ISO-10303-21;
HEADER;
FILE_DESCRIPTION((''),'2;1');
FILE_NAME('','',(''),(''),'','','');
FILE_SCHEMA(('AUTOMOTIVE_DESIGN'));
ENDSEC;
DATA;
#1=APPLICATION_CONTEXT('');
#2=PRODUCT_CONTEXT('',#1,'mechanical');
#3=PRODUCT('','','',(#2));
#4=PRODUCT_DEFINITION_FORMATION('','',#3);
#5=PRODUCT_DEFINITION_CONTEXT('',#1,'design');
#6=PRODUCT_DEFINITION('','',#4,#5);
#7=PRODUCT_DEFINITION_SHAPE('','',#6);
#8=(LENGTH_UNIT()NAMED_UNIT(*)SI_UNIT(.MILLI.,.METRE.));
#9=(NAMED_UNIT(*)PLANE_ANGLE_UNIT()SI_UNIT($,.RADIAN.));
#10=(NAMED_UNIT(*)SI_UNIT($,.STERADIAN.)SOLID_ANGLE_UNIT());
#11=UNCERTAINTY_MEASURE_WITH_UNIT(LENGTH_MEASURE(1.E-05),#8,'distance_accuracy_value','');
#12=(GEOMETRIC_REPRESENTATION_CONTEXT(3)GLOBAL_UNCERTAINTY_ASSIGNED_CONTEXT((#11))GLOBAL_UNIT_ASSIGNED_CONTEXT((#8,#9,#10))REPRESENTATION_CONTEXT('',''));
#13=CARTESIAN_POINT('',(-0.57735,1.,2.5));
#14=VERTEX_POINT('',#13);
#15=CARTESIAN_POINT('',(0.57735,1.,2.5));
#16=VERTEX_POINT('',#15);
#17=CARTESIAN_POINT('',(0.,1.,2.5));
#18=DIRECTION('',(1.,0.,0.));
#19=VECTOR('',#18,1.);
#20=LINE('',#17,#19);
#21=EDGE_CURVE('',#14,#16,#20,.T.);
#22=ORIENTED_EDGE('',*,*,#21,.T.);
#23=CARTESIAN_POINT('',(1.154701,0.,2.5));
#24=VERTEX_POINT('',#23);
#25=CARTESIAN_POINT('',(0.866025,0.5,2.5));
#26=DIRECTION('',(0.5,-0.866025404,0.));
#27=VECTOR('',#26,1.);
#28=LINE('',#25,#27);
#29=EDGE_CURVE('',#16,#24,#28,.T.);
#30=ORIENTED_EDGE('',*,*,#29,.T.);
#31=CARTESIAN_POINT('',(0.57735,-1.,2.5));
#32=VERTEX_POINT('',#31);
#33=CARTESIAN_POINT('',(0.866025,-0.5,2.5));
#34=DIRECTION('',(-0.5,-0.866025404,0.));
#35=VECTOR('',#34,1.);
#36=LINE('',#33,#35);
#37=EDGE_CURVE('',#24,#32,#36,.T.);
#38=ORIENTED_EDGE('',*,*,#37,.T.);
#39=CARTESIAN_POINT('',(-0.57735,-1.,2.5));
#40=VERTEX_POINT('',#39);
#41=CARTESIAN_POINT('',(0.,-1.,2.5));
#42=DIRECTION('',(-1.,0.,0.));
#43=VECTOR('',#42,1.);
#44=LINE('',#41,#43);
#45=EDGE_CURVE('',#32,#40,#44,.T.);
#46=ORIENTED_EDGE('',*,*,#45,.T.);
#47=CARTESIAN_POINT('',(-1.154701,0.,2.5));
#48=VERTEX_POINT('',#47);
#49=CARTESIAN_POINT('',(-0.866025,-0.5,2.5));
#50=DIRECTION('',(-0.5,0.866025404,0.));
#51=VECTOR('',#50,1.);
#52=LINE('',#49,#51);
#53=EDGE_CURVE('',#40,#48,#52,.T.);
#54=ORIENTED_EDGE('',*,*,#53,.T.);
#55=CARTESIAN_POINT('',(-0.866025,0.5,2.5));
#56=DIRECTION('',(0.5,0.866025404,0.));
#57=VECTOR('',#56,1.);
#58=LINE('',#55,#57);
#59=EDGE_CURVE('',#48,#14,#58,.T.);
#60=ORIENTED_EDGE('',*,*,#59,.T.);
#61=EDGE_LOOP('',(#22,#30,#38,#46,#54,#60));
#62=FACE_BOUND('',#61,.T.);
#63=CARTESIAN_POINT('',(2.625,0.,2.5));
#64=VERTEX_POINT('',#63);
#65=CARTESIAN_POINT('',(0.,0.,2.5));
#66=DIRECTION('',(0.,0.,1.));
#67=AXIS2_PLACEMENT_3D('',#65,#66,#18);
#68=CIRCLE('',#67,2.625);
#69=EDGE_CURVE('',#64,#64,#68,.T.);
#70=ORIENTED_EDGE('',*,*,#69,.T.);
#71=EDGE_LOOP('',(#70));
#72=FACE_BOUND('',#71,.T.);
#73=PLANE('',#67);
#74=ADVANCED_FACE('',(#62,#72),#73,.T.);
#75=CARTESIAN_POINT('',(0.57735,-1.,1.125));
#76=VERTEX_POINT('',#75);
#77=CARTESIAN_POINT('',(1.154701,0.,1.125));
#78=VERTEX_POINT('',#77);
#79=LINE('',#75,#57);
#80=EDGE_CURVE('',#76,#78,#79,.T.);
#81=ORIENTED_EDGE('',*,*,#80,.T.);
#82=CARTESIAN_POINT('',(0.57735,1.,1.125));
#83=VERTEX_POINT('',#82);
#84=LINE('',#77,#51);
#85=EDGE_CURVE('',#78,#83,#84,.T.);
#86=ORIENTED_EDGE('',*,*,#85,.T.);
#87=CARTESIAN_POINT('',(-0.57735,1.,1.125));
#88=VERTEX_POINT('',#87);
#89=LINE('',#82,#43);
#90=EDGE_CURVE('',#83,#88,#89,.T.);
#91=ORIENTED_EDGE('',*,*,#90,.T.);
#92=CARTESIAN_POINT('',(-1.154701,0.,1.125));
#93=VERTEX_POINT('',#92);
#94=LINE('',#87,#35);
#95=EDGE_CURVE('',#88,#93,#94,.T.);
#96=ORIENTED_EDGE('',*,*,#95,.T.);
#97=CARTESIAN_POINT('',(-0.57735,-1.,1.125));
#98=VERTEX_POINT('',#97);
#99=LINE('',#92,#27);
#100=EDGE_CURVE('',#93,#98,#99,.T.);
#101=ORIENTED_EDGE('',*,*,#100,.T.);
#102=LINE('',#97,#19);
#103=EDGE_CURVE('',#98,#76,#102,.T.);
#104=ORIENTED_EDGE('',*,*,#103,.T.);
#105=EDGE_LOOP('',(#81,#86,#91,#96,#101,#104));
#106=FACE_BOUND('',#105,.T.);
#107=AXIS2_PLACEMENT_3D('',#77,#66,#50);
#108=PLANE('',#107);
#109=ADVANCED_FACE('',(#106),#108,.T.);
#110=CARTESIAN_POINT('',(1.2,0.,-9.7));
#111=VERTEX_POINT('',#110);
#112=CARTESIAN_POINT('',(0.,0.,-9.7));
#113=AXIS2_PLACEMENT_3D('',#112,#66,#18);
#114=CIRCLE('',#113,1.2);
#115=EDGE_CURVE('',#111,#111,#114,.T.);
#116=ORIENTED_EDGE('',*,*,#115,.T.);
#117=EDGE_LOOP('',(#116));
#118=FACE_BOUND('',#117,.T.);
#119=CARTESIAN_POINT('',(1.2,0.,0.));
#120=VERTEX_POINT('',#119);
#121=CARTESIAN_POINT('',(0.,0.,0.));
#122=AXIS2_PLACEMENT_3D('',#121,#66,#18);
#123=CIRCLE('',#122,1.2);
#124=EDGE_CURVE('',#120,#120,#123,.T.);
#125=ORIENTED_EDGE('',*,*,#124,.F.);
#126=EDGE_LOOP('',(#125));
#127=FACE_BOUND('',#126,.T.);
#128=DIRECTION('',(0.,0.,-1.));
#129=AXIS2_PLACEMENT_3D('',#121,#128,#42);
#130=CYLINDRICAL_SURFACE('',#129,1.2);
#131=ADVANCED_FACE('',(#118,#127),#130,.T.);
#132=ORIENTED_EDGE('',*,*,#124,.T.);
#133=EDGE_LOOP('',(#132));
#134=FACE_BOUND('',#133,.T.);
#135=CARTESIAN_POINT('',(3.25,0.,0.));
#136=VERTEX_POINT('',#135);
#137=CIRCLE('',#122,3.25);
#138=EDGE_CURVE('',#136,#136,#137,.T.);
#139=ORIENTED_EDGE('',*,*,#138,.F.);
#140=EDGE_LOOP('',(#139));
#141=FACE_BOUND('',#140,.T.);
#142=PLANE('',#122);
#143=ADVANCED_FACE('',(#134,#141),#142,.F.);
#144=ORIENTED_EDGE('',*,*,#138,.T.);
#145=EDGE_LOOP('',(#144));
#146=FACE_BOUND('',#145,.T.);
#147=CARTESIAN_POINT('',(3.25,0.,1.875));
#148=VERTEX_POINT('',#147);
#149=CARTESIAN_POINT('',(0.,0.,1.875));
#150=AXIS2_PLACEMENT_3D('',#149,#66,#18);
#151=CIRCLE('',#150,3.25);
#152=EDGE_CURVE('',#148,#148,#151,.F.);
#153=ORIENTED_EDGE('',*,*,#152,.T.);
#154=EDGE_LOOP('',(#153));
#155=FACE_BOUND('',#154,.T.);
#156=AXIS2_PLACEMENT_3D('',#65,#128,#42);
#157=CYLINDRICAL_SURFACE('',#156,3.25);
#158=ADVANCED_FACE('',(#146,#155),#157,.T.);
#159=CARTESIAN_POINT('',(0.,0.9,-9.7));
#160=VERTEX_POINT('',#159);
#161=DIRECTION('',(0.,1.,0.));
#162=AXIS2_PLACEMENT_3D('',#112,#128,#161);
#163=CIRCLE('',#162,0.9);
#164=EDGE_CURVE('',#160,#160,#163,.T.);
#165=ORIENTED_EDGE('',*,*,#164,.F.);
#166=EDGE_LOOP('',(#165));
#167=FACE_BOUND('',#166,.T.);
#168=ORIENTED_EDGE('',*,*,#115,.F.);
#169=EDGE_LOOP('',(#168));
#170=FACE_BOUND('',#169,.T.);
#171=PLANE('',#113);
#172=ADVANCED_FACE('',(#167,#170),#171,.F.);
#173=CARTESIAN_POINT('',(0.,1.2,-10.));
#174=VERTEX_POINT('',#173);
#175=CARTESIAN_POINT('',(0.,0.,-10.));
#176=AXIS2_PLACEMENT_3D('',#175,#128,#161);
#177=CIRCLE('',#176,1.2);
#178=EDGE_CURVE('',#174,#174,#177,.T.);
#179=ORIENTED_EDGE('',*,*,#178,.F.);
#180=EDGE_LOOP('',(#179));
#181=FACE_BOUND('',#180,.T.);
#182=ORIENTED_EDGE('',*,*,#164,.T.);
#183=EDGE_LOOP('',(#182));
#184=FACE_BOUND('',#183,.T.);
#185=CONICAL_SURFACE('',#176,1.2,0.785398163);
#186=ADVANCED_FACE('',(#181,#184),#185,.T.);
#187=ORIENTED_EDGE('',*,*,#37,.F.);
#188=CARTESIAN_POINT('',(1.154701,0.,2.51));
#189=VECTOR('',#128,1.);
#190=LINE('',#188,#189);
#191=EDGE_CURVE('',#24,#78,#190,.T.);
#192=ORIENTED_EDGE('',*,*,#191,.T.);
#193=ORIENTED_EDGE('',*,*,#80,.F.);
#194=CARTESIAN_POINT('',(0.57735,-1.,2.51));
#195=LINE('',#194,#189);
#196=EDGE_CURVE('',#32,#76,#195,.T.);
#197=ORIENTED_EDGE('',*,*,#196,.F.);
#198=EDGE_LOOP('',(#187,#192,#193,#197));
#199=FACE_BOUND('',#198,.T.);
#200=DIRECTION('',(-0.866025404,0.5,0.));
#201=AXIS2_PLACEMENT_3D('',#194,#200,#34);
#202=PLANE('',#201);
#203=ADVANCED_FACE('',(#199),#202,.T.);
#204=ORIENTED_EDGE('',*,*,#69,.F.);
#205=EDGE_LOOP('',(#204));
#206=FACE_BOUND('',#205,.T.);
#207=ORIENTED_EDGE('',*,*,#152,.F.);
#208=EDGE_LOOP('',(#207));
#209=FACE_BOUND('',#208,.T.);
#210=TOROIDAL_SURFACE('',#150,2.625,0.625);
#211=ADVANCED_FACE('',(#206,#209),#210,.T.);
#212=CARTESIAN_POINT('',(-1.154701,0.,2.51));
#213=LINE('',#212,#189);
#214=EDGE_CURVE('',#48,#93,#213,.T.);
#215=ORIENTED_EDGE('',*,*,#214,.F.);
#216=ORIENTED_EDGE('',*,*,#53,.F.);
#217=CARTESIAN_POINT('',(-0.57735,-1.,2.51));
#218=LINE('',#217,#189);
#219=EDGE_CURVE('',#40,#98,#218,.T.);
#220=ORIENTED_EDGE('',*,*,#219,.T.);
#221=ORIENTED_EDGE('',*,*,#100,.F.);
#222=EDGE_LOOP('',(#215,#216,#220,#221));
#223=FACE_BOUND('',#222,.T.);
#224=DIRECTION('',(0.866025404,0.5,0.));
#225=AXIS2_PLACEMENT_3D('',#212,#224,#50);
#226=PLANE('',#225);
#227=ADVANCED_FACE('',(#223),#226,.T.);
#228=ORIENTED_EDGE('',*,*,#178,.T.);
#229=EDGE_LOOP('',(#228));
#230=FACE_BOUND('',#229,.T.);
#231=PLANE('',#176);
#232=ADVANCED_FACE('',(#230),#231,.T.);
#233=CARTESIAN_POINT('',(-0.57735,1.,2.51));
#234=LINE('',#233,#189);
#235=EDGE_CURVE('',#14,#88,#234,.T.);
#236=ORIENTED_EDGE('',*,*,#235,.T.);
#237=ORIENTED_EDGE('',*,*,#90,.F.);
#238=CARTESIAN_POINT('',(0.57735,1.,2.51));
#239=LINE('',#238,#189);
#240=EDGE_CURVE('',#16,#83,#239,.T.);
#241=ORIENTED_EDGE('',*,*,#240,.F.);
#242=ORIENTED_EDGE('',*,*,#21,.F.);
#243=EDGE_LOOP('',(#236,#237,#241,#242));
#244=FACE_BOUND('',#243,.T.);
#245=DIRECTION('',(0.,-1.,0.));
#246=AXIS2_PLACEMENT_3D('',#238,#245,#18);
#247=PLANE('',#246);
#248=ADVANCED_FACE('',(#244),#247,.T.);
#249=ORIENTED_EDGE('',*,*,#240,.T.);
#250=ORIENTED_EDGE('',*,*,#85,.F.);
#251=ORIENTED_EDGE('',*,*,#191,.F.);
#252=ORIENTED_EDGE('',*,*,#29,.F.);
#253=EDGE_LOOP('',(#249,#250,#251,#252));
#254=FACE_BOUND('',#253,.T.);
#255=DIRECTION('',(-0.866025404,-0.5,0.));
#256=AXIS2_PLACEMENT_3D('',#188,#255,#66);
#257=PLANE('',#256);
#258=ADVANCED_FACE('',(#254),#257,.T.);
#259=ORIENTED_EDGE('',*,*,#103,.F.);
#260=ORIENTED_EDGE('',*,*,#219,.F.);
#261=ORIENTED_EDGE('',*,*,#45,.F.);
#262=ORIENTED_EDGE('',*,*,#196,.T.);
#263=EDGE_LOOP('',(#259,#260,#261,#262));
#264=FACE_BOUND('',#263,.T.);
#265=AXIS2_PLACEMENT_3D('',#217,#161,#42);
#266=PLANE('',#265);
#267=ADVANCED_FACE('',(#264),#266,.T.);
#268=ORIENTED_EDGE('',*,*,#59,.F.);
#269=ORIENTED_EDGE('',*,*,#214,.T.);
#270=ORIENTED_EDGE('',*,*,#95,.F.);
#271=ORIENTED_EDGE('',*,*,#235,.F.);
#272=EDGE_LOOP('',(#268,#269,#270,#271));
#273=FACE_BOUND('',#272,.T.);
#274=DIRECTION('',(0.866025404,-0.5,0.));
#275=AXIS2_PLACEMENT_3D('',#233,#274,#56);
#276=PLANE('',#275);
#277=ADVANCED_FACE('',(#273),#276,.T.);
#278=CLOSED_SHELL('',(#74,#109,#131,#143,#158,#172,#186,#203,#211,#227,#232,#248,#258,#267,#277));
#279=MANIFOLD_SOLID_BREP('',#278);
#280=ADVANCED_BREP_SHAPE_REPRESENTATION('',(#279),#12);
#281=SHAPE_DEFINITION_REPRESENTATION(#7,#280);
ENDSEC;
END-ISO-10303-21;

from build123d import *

# Parameters (mm, degrees)
F_0015_CYLINDER_SKETCH_R    = 3.25
F_0015_CYLINDER_DEPTH       = 2.5
F_0016_FILLET_R             = 0.625
F_0017_EXTRUDE_DEPTH        = 1.385
F_0017_EXTRUDE_ROTATE_ANGLE = 120
F_0020_CYLINDER_SKETCH_R    = 1.2
F_0020_CYLINDER_DEPTH       = 9.7
F_0021_CONE_ROTATE_ANGLE    = 90


with BuildPart() as part:
    # 0015_cylinder_Sketch → 0015_cylinder (new body)
    with BuildSketch(Plane.XY):
        Circle(F_0015_CYLINDER_SKETCH_R)
    extrude(amount=F_0015_CYLINDER_DEPTH)

    # 0016_fillet
    f_0016_fillet_edges = [part.edges().sort_by_distance(p)[0] for p in [
        (-3.25, 0, 2.5),
    ]]
    fillet(f_0016_fillet_edges, radius=F_0016_FILLET_R)


with BuildPart() as body_2:
    # 0017_extrude_Sketch → 0017_extrude (new body)
    with BuildSketch(Plane.XY):
        Polygon((0, 0), (1.154700538, 0), (1.732050808, 1), (1.154700538, 2), (0, 2), (-0.577350269, 1), align=None)
    extrude(amount=F_0017_EXTRUDE_DEPTH)


with BuildPart() as body_2_1:
    # 0017_extrude_Rotate: read off the stored shape, not the designer's step
    # 0017_extrude_Rotate: moved
    add(body_2.part.rotate(Axis((0, 0, 0), (0, 0, 1)), F_0017_EXTRUDE_ROTATE_ANGLE))


with BuildPart() as body_2_2:
    # 0017_extrude_Translate: moved
    add(body_2_1.part.moved(Location((1.154700538, 0, 1.125))))


with BuildPart() as part_1:
    add(part.part)

    # 0019_sub: cut body 2
    add(body_2_2.part, mode=Mode.SUBTRACT)


with BuildPart() as body_2_2_1:
    # 0020_cylinder_Sketch → 0020_cylinder (new body)
    with BuildSketch(Plane.XY):
        Circle(F_0020_CYLINDER_SKETCH_R)
    extrude(amount=F_0020_CYLINDER_DEPTH)


with BuildPart() as body_2_2_2:
    # 0020_cylinder_Translate: moved
    add(body_2_2_1.part.moved(Location((0, 0, -9.7))))


with BuildPart() as body_3:
    # 0021_cone_Sketch → 0021_cone (revolve)
    with BuildSketch(Plane.XY, mode=Mode.PRIVATE) as f_0021_cone_sk:
        Polygon((0, 0), (1.2, 0), (0.9, 0.3), (0, 0.3), align=None)
    revolve(f_0021_cone_sk.sketch.rotate(Axis((0, -100, 0), (0, 1, 0)), 90), axis=Axis((0, -100, 0), (0, 1, 0)))


with BuildPart() as body_3_1:
    # 0021_cone_Rotate: moved
    add(body_3.part.rotate(Axis((0, 0, 0), (1, 0, 0)), F_0021_CONE_ROTATE_ANGLE))


with BuildPart() as body_3_2:
    # 0021_cone_Translate: moved
    add(body_3_1.part.moved(Location((0, 0, -10))))


with BuildPart() as body_2_2_3:
    add(body_2_2_2.part)

    # 0023_add: union body 3
    add(body_3_2.part)


with BuildPart() as part_2:
    add(part_1.part)

    # 0024_add: union body 2 2
    add(body_2_2_3.part)


solid = part_2.part
